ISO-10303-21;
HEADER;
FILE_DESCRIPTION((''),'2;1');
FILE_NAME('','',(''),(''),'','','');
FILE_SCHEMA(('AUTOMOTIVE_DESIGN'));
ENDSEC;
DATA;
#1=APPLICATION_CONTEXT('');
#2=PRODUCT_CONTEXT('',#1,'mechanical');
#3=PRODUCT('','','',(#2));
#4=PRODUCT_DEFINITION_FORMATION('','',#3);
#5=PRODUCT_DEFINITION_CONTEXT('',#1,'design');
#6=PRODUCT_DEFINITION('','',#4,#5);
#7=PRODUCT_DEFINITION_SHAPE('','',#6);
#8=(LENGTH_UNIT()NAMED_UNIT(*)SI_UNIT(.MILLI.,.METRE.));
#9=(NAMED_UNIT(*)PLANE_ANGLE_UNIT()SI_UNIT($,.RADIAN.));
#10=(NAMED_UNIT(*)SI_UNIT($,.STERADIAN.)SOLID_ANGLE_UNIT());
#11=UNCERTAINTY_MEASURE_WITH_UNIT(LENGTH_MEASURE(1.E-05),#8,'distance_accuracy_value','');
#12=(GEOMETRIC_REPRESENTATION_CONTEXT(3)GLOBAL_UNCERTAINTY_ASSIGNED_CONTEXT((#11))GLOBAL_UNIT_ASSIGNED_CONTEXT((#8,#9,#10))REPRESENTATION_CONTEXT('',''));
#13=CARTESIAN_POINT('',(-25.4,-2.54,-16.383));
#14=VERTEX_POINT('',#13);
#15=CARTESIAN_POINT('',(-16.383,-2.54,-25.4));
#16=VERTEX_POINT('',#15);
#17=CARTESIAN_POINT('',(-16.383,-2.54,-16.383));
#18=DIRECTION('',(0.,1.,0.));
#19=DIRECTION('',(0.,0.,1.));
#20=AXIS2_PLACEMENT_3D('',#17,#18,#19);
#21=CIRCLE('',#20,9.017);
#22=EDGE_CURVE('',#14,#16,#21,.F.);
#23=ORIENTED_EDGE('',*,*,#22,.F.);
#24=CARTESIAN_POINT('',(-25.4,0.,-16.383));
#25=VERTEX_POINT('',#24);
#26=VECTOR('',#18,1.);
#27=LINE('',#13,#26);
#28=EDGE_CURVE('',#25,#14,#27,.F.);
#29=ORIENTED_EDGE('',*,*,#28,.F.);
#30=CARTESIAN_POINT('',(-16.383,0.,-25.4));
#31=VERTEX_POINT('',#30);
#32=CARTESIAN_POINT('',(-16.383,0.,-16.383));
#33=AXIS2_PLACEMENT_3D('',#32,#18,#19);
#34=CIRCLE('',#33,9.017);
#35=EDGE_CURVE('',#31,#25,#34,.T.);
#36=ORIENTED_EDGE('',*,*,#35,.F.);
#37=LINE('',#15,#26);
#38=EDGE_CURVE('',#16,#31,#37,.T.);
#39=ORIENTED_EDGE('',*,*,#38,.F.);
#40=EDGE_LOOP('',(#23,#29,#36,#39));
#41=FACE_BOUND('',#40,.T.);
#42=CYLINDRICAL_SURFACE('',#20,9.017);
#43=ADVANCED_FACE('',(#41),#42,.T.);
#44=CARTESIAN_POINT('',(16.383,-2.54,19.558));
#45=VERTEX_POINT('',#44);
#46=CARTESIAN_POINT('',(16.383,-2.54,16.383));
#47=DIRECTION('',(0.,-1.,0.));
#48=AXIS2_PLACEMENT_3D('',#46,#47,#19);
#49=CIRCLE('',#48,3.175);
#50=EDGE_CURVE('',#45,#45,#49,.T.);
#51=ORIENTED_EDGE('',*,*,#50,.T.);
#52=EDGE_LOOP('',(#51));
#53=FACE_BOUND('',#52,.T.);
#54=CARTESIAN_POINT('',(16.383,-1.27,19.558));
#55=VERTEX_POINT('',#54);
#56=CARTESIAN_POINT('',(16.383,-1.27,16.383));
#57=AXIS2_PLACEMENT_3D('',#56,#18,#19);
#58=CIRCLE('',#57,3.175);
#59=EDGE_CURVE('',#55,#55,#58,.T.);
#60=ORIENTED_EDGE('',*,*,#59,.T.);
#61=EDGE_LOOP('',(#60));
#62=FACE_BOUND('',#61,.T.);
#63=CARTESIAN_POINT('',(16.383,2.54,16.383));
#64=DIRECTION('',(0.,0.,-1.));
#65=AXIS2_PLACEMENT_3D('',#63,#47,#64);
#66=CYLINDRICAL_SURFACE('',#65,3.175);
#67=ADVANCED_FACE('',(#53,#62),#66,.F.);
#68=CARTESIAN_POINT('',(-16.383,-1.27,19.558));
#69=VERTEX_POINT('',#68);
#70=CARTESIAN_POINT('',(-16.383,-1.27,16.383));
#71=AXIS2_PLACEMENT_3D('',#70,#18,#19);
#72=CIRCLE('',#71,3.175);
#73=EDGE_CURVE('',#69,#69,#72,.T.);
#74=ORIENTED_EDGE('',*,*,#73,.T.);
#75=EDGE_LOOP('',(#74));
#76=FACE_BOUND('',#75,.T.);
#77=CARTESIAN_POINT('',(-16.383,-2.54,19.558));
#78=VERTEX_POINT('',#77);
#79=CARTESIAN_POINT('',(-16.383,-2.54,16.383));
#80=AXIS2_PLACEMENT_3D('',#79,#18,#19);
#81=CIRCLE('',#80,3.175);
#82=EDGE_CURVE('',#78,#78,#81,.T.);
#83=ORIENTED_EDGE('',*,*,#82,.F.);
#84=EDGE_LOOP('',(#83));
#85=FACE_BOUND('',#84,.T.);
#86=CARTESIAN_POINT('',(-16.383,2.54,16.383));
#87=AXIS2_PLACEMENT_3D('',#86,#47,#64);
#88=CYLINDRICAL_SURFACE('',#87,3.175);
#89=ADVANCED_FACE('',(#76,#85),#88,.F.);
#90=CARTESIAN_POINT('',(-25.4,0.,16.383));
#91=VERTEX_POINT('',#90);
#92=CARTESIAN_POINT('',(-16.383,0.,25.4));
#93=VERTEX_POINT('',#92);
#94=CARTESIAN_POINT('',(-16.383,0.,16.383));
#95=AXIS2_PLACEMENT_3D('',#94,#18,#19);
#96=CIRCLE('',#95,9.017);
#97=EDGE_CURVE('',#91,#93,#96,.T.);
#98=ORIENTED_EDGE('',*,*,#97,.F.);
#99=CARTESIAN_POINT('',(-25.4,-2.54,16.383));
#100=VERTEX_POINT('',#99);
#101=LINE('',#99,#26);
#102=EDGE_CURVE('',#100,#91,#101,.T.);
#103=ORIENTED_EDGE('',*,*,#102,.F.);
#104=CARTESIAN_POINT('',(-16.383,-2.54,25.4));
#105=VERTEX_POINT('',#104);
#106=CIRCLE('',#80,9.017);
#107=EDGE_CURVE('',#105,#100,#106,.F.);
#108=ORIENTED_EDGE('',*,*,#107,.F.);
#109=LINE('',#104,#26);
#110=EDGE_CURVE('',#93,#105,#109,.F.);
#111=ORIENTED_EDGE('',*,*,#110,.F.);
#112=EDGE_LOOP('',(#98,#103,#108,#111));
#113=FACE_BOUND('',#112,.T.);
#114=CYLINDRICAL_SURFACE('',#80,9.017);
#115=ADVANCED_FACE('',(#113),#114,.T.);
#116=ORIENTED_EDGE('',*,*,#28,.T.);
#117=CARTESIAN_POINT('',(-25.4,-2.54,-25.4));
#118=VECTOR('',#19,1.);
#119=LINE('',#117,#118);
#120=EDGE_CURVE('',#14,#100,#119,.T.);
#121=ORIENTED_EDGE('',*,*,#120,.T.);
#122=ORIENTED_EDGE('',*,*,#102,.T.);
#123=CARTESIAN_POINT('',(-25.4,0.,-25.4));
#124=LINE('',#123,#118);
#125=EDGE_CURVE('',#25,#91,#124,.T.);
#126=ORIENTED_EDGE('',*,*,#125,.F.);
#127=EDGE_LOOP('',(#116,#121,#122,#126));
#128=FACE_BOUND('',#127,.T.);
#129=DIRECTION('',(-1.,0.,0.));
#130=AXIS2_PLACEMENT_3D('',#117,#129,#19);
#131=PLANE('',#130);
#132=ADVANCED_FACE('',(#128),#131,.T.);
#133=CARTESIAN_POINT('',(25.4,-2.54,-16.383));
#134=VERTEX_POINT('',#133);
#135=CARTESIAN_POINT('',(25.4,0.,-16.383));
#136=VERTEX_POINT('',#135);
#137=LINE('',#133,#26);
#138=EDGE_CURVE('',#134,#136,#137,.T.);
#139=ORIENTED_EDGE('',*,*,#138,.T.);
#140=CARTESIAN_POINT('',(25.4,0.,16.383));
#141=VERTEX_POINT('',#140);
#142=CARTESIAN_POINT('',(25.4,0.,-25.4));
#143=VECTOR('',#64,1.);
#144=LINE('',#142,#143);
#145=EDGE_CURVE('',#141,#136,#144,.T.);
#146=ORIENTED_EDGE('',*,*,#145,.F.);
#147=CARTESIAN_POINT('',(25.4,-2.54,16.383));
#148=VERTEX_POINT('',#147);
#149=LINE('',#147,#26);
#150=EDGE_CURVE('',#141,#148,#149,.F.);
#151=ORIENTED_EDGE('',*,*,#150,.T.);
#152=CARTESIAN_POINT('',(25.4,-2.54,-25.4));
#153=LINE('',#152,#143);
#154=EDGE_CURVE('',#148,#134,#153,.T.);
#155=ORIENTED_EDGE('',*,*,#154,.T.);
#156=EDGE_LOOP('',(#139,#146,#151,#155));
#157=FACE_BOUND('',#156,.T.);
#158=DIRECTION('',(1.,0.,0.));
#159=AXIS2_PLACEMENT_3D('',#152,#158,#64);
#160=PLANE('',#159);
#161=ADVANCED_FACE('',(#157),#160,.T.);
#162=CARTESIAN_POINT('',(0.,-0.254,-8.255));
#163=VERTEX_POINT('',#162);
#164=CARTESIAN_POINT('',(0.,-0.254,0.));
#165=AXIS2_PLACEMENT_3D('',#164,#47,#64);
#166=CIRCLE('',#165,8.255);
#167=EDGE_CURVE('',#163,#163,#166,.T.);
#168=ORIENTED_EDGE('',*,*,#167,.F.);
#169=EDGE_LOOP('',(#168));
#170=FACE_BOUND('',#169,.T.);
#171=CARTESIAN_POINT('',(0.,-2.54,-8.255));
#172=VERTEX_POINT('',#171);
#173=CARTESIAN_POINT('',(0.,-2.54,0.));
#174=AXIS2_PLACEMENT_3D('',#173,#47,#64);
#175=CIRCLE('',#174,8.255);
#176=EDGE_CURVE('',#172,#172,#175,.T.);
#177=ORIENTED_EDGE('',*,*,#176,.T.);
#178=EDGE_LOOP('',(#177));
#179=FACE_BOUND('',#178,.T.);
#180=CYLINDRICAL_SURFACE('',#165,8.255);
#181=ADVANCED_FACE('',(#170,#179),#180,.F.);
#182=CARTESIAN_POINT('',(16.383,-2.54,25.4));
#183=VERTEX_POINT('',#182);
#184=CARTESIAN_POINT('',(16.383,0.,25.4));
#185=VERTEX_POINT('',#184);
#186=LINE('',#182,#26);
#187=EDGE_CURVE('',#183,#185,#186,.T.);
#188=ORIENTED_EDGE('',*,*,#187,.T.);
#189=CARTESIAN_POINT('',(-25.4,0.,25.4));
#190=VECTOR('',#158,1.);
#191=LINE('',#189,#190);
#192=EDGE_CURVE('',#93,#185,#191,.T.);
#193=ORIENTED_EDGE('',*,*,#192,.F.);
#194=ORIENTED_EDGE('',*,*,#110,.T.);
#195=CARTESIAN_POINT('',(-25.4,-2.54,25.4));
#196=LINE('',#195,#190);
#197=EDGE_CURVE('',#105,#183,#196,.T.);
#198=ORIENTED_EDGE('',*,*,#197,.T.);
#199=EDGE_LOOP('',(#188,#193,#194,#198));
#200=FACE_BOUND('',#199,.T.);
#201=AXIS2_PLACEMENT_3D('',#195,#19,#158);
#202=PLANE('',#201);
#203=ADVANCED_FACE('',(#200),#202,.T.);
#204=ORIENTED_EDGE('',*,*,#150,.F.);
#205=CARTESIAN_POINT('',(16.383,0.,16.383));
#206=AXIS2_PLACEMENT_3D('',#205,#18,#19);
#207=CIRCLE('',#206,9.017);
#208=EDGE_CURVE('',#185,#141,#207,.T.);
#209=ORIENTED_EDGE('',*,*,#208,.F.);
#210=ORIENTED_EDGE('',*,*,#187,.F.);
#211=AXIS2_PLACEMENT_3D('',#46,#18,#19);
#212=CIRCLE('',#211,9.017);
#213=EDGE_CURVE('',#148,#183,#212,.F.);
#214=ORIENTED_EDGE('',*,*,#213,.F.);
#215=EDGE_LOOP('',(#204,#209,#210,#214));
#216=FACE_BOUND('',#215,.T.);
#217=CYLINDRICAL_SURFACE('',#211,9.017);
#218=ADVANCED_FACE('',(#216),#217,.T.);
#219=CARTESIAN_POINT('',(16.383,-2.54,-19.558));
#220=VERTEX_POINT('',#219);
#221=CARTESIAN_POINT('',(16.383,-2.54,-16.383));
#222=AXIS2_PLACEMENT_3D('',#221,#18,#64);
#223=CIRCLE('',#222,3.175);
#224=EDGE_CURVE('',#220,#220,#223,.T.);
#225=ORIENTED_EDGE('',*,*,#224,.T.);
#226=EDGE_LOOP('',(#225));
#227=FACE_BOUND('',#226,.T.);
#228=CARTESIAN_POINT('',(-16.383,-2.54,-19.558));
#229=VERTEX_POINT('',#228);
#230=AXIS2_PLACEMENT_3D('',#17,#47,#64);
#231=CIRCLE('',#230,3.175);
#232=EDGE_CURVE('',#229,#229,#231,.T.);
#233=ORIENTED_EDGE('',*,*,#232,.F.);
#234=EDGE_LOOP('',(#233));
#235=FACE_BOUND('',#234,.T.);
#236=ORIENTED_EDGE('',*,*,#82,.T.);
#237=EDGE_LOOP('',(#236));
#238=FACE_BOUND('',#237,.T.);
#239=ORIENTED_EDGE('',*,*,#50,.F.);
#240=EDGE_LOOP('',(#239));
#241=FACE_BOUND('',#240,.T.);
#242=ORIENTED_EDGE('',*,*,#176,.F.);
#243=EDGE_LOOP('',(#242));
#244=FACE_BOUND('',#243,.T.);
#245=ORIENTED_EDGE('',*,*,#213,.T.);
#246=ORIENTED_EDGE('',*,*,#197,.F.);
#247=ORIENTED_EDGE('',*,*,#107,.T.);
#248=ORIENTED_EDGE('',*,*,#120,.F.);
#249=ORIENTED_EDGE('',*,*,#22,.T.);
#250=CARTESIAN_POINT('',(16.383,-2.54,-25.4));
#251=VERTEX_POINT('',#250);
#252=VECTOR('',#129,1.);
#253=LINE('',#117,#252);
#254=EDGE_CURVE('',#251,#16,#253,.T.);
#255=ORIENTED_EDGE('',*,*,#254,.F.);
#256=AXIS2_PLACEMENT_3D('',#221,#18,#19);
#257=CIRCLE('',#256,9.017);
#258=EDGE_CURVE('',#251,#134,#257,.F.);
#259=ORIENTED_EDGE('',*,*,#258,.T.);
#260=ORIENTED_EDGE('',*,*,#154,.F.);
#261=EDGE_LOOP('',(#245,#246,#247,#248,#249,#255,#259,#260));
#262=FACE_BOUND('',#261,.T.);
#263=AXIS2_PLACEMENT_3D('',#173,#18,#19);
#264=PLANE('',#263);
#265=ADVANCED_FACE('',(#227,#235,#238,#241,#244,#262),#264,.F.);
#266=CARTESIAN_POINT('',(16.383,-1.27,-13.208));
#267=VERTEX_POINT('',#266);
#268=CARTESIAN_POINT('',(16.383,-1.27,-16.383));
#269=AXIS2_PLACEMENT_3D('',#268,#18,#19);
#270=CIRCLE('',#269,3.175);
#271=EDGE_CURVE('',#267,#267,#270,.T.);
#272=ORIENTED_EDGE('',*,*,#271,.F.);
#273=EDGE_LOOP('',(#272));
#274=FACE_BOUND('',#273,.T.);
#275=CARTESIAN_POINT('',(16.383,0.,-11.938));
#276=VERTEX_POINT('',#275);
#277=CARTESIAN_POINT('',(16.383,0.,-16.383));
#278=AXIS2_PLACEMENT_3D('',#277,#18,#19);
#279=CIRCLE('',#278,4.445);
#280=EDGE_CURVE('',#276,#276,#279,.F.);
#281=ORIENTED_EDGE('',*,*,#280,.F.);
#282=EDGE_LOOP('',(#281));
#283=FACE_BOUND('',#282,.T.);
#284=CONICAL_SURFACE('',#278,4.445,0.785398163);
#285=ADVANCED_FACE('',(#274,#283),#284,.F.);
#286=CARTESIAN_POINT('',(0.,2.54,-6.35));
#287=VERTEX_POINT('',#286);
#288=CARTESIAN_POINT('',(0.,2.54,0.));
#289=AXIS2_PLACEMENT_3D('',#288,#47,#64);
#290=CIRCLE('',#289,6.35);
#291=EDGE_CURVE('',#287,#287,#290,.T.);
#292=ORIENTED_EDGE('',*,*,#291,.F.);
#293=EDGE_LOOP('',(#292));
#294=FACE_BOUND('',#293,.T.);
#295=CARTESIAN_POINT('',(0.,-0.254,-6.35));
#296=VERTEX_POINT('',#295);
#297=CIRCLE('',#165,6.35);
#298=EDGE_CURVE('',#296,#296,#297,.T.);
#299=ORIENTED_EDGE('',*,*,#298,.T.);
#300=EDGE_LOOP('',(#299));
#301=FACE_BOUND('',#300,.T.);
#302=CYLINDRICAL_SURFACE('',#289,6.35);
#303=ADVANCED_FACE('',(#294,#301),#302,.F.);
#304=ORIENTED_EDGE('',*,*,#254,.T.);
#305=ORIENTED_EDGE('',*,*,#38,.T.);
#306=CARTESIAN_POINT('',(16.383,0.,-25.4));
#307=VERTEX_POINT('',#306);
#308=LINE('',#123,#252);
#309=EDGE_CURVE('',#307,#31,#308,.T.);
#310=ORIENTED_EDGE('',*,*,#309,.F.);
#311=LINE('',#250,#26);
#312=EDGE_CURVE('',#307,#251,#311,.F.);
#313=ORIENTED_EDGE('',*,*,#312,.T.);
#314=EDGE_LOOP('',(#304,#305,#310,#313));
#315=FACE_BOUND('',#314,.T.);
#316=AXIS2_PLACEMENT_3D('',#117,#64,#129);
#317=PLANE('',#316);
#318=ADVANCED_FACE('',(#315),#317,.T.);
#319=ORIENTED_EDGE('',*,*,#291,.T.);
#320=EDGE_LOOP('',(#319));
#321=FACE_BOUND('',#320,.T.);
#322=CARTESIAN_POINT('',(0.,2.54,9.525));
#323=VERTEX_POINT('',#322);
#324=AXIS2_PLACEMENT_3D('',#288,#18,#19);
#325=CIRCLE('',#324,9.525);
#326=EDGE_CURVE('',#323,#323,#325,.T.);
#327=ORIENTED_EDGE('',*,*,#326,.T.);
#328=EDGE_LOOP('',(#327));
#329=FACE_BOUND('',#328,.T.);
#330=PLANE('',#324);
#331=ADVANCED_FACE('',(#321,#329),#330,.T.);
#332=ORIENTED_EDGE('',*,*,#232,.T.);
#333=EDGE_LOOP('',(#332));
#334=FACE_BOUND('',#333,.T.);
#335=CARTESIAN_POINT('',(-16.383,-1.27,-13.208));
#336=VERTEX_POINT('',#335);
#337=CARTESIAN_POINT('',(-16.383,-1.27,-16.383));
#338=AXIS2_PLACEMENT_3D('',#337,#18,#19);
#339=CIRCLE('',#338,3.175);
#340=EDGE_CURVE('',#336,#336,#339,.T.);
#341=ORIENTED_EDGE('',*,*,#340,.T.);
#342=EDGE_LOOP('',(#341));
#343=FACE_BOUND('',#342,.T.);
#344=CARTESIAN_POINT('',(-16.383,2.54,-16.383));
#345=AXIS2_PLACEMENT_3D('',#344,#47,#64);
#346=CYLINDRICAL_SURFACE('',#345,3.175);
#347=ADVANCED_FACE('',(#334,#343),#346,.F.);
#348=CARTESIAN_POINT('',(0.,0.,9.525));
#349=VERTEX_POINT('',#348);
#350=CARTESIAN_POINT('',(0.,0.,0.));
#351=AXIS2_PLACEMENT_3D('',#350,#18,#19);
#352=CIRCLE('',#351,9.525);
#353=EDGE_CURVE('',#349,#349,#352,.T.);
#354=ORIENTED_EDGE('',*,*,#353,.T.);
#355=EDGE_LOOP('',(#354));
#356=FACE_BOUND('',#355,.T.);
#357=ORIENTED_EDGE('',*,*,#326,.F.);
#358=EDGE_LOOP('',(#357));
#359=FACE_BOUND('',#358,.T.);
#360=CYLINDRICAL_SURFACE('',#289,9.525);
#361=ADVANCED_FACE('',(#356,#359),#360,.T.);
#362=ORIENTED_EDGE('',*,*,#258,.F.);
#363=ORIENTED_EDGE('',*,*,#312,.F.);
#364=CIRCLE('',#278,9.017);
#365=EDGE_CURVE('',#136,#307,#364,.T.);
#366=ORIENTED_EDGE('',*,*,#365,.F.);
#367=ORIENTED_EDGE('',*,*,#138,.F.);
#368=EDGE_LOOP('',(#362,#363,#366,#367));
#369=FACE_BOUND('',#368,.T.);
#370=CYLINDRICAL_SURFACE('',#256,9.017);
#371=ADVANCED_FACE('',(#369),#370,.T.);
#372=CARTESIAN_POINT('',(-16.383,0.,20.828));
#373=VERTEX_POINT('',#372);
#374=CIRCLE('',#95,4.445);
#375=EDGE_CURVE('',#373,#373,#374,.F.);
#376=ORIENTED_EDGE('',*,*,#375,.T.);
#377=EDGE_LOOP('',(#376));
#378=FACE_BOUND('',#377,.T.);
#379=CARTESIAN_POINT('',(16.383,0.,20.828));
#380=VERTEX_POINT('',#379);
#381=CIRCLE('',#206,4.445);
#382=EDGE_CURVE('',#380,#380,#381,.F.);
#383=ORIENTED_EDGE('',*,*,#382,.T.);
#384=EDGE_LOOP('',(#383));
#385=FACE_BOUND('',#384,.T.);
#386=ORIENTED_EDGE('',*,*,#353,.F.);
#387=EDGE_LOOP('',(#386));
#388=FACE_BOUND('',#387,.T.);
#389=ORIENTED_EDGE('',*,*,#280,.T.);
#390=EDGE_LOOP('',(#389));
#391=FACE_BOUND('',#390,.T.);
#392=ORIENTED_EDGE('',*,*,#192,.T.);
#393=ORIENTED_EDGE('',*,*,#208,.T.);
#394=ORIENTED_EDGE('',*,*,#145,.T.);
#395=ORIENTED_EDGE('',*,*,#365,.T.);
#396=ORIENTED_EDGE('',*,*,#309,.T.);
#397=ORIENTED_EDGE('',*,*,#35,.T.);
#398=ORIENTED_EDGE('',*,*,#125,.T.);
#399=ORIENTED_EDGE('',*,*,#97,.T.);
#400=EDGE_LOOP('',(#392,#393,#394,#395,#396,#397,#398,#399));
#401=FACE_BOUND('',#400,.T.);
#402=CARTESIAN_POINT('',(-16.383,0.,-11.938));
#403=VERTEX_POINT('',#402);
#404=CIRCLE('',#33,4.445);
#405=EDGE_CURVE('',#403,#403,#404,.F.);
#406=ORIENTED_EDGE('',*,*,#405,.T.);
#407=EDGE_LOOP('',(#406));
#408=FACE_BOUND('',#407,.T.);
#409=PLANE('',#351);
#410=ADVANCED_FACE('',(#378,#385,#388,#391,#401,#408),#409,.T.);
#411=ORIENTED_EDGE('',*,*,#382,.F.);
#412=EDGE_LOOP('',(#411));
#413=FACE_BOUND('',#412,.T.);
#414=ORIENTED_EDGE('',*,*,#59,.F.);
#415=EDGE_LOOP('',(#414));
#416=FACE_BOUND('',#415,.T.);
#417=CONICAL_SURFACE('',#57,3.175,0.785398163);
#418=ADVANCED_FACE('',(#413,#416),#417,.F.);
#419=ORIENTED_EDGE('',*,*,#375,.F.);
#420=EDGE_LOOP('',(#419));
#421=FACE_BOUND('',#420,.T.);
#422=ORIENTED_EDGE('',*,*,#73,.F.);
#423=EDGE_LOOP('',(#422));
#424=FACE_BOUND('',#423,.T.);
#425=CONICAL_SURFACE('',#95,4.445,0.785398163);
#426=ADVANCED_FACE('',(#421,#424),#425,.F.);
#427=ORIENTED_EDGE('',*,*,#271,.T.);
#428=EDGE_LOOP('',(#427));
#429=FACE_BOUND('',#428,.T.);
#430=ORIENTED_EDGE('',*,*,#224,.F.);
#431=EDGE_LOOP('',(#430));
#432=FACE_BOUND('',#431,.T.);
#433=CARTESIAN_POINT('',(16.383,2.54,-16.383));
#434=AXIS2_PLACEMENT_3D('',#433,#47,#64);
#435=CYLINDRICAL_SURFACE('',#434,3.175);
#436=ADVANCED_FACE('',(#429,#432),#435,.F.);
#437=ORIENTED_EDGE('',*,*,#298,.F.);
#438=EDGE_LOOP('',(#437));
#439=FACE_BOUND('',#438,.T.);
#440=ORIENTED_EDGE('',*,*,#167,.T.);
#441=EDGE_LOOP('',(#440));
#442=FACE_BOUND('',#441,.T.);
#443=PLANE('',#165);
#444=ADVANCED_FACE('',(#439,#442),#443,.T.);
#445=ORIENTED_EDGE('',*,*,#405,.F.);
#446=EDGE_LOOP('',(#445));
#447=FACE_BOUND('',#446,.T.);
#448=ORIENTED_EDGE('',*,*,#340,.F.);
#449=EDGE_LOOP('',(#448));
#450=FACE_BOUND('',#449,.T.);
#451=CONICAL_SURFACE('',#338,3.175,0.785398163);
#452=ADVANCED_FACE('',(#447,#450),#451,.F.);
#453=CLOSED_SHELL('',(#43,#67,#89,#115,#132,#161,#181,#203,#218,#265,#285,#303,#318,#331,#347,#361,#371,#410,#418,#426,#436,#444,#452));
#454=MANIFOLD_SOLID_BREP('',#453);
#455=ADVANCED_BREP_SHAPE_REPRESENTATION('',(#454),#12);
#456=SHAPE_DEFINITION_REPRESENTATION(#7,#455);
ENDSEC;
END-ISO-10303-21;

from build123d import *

# Parameters (mm, degrees)
SKETCH2_W               = 50.8
SKETCH2_H               = 50.8
BASE_FLANGE1_DEPTH      = 2.54
FILLET1_R               = 9.017
SKETCH9_R               = 9.525
BOSS_EXTRUDE1_DEPTH     = 2.54
SKETCH10_R              = 8.255
CUT_EXTRUDE1_DEPTH      = 2.286
SKETCH11_R              = 6.35
CUT_EXTRUDE2_DEPTH      = 37.029521729
SKETCH12_R              = 3.175
CUT_EXTRUDE4_DEPTH      = 37.278456417
MIRROR2_COPY_1_SKETCH_R = 3.175
MIRROR2_COPY_1_DEPTH    = 37.278456417
CHAMFER1_SIZE           = 1.27


# Sheet-metal steps are written as plain solids
with BuildPart() as part:
    # Sketch2 → Base-Flange1 (new body)
    with BuildSketch(Plane(origin=(0, 0, 0), x_dir=(1, 0, 0), z_dir=(0, 1, 0))):
        Rectangle(SKETCH2_W, SKETCH2_H)
    extrude(amount=-BASE_FLANGE1_DEPTH)

    # Fillet1
    fillet1_edges = [part.edges().sort_by_distance(p)[0] for p in [
        (25.4, -1.27, 25.4),
        (-25.4, -1.27, 25.4),
        (-25.4, -1.27, -25.4),
        (25.4, -1.27, -25.4),
    ]]
    fillet(fillet1_edges, radius=FILLET1_R)

    # Sketch9 → Boss-Extrude1 (add)
    with BuildSketch(Plane(origin=(0, 0, 0), x_dir=(1, 0, 0), z_dir=(0, 1, 0))):
        with Locations(Location((0, 0, 0), (0, 0, 270))):
            Circle(SKETCH9_R)
    extrude(amount=BOSS_EXTRUDE1_DEPTH)

    # Sketch10 → Cut-Extrude1 (cut)
    with BuildSketch(Plane.XZ.offset(2.54)):
        with Locations(Location((0, 0, 0), (0, 0, 270))):
            Circle(SKETCH10_R)
    extrude(amount=-CUT_EXTRUDE1_DEPTH, mode=Mode.SUBTRACT)

    # Sketch11 → Cut-Extrude2 (cut, through all)
    with BuildSketch(Plane.XZ.offset(0.254)):
        with Locations(Location((0, 0, 0), (0, 0, 270))):
            Circle(SKETCH11_R)
    extrude(amount=-CUT_EXTRUDE2_DEPTH, mode=Mode.SUBTRACT)

    # Sketch12 → Cut-Extrude4 (cut, through all)
    with BuildSketch(Plane.XZ.offset(2.54)):
        with Locations(Location((-16.383, -16.383, 0), (0, 0, 270))):
            Circle(SKETCH12_R)
    cut_extrude4 = extrude(amount=-CUT_EXTRUDE4_DEPTH, mode=Mode.SUBTRACT)

    # Mirror1: Cut-Extrude4 across plane
    add(cut_extrude4.mirror(Plane(origin=(0, 0, 0), x_dir=(0, 0, 1), z_dir=(1, 0, 0))), mode=Mode.SUBTRACT)

    # Mirror2: Cut-Extrude4 across plane
    add(cut_extrude4.mirror(Plane.XY), mode=Mode.SUBTRACT)

    # Mirror2 copy 1 sketch → Mirror2 copy 1 (cut, through all)
    with BuildSketch(Plane(origin=(0, -2.54, 0), x_dir=(-1, 0, 0), z_dir=(0, -1, 0))):
        with Locations(Location((-16.383, -16.383, 0), (0, 0, 270))):
            Circle(MIRROR2_COPY_1_SKETCH_R)
    extrude(amount=-MIRROR2_COPY_1_DEPTH, mode=Mode.SUBTRACT)

    # Chamfer1
    chamfer1_edges = [part.edges().sort_by_distance(p)[0] for p in [
        (-16.383, 0, -13.208),
        (16.383, 0, -13.208),
        (16.383, 0, 13.208),
        (-16.383, 0, 13.208),
    ]]
    chamfer(chamfer1_edges, length=CHAMFER1_SIZE)


solid = part.part
